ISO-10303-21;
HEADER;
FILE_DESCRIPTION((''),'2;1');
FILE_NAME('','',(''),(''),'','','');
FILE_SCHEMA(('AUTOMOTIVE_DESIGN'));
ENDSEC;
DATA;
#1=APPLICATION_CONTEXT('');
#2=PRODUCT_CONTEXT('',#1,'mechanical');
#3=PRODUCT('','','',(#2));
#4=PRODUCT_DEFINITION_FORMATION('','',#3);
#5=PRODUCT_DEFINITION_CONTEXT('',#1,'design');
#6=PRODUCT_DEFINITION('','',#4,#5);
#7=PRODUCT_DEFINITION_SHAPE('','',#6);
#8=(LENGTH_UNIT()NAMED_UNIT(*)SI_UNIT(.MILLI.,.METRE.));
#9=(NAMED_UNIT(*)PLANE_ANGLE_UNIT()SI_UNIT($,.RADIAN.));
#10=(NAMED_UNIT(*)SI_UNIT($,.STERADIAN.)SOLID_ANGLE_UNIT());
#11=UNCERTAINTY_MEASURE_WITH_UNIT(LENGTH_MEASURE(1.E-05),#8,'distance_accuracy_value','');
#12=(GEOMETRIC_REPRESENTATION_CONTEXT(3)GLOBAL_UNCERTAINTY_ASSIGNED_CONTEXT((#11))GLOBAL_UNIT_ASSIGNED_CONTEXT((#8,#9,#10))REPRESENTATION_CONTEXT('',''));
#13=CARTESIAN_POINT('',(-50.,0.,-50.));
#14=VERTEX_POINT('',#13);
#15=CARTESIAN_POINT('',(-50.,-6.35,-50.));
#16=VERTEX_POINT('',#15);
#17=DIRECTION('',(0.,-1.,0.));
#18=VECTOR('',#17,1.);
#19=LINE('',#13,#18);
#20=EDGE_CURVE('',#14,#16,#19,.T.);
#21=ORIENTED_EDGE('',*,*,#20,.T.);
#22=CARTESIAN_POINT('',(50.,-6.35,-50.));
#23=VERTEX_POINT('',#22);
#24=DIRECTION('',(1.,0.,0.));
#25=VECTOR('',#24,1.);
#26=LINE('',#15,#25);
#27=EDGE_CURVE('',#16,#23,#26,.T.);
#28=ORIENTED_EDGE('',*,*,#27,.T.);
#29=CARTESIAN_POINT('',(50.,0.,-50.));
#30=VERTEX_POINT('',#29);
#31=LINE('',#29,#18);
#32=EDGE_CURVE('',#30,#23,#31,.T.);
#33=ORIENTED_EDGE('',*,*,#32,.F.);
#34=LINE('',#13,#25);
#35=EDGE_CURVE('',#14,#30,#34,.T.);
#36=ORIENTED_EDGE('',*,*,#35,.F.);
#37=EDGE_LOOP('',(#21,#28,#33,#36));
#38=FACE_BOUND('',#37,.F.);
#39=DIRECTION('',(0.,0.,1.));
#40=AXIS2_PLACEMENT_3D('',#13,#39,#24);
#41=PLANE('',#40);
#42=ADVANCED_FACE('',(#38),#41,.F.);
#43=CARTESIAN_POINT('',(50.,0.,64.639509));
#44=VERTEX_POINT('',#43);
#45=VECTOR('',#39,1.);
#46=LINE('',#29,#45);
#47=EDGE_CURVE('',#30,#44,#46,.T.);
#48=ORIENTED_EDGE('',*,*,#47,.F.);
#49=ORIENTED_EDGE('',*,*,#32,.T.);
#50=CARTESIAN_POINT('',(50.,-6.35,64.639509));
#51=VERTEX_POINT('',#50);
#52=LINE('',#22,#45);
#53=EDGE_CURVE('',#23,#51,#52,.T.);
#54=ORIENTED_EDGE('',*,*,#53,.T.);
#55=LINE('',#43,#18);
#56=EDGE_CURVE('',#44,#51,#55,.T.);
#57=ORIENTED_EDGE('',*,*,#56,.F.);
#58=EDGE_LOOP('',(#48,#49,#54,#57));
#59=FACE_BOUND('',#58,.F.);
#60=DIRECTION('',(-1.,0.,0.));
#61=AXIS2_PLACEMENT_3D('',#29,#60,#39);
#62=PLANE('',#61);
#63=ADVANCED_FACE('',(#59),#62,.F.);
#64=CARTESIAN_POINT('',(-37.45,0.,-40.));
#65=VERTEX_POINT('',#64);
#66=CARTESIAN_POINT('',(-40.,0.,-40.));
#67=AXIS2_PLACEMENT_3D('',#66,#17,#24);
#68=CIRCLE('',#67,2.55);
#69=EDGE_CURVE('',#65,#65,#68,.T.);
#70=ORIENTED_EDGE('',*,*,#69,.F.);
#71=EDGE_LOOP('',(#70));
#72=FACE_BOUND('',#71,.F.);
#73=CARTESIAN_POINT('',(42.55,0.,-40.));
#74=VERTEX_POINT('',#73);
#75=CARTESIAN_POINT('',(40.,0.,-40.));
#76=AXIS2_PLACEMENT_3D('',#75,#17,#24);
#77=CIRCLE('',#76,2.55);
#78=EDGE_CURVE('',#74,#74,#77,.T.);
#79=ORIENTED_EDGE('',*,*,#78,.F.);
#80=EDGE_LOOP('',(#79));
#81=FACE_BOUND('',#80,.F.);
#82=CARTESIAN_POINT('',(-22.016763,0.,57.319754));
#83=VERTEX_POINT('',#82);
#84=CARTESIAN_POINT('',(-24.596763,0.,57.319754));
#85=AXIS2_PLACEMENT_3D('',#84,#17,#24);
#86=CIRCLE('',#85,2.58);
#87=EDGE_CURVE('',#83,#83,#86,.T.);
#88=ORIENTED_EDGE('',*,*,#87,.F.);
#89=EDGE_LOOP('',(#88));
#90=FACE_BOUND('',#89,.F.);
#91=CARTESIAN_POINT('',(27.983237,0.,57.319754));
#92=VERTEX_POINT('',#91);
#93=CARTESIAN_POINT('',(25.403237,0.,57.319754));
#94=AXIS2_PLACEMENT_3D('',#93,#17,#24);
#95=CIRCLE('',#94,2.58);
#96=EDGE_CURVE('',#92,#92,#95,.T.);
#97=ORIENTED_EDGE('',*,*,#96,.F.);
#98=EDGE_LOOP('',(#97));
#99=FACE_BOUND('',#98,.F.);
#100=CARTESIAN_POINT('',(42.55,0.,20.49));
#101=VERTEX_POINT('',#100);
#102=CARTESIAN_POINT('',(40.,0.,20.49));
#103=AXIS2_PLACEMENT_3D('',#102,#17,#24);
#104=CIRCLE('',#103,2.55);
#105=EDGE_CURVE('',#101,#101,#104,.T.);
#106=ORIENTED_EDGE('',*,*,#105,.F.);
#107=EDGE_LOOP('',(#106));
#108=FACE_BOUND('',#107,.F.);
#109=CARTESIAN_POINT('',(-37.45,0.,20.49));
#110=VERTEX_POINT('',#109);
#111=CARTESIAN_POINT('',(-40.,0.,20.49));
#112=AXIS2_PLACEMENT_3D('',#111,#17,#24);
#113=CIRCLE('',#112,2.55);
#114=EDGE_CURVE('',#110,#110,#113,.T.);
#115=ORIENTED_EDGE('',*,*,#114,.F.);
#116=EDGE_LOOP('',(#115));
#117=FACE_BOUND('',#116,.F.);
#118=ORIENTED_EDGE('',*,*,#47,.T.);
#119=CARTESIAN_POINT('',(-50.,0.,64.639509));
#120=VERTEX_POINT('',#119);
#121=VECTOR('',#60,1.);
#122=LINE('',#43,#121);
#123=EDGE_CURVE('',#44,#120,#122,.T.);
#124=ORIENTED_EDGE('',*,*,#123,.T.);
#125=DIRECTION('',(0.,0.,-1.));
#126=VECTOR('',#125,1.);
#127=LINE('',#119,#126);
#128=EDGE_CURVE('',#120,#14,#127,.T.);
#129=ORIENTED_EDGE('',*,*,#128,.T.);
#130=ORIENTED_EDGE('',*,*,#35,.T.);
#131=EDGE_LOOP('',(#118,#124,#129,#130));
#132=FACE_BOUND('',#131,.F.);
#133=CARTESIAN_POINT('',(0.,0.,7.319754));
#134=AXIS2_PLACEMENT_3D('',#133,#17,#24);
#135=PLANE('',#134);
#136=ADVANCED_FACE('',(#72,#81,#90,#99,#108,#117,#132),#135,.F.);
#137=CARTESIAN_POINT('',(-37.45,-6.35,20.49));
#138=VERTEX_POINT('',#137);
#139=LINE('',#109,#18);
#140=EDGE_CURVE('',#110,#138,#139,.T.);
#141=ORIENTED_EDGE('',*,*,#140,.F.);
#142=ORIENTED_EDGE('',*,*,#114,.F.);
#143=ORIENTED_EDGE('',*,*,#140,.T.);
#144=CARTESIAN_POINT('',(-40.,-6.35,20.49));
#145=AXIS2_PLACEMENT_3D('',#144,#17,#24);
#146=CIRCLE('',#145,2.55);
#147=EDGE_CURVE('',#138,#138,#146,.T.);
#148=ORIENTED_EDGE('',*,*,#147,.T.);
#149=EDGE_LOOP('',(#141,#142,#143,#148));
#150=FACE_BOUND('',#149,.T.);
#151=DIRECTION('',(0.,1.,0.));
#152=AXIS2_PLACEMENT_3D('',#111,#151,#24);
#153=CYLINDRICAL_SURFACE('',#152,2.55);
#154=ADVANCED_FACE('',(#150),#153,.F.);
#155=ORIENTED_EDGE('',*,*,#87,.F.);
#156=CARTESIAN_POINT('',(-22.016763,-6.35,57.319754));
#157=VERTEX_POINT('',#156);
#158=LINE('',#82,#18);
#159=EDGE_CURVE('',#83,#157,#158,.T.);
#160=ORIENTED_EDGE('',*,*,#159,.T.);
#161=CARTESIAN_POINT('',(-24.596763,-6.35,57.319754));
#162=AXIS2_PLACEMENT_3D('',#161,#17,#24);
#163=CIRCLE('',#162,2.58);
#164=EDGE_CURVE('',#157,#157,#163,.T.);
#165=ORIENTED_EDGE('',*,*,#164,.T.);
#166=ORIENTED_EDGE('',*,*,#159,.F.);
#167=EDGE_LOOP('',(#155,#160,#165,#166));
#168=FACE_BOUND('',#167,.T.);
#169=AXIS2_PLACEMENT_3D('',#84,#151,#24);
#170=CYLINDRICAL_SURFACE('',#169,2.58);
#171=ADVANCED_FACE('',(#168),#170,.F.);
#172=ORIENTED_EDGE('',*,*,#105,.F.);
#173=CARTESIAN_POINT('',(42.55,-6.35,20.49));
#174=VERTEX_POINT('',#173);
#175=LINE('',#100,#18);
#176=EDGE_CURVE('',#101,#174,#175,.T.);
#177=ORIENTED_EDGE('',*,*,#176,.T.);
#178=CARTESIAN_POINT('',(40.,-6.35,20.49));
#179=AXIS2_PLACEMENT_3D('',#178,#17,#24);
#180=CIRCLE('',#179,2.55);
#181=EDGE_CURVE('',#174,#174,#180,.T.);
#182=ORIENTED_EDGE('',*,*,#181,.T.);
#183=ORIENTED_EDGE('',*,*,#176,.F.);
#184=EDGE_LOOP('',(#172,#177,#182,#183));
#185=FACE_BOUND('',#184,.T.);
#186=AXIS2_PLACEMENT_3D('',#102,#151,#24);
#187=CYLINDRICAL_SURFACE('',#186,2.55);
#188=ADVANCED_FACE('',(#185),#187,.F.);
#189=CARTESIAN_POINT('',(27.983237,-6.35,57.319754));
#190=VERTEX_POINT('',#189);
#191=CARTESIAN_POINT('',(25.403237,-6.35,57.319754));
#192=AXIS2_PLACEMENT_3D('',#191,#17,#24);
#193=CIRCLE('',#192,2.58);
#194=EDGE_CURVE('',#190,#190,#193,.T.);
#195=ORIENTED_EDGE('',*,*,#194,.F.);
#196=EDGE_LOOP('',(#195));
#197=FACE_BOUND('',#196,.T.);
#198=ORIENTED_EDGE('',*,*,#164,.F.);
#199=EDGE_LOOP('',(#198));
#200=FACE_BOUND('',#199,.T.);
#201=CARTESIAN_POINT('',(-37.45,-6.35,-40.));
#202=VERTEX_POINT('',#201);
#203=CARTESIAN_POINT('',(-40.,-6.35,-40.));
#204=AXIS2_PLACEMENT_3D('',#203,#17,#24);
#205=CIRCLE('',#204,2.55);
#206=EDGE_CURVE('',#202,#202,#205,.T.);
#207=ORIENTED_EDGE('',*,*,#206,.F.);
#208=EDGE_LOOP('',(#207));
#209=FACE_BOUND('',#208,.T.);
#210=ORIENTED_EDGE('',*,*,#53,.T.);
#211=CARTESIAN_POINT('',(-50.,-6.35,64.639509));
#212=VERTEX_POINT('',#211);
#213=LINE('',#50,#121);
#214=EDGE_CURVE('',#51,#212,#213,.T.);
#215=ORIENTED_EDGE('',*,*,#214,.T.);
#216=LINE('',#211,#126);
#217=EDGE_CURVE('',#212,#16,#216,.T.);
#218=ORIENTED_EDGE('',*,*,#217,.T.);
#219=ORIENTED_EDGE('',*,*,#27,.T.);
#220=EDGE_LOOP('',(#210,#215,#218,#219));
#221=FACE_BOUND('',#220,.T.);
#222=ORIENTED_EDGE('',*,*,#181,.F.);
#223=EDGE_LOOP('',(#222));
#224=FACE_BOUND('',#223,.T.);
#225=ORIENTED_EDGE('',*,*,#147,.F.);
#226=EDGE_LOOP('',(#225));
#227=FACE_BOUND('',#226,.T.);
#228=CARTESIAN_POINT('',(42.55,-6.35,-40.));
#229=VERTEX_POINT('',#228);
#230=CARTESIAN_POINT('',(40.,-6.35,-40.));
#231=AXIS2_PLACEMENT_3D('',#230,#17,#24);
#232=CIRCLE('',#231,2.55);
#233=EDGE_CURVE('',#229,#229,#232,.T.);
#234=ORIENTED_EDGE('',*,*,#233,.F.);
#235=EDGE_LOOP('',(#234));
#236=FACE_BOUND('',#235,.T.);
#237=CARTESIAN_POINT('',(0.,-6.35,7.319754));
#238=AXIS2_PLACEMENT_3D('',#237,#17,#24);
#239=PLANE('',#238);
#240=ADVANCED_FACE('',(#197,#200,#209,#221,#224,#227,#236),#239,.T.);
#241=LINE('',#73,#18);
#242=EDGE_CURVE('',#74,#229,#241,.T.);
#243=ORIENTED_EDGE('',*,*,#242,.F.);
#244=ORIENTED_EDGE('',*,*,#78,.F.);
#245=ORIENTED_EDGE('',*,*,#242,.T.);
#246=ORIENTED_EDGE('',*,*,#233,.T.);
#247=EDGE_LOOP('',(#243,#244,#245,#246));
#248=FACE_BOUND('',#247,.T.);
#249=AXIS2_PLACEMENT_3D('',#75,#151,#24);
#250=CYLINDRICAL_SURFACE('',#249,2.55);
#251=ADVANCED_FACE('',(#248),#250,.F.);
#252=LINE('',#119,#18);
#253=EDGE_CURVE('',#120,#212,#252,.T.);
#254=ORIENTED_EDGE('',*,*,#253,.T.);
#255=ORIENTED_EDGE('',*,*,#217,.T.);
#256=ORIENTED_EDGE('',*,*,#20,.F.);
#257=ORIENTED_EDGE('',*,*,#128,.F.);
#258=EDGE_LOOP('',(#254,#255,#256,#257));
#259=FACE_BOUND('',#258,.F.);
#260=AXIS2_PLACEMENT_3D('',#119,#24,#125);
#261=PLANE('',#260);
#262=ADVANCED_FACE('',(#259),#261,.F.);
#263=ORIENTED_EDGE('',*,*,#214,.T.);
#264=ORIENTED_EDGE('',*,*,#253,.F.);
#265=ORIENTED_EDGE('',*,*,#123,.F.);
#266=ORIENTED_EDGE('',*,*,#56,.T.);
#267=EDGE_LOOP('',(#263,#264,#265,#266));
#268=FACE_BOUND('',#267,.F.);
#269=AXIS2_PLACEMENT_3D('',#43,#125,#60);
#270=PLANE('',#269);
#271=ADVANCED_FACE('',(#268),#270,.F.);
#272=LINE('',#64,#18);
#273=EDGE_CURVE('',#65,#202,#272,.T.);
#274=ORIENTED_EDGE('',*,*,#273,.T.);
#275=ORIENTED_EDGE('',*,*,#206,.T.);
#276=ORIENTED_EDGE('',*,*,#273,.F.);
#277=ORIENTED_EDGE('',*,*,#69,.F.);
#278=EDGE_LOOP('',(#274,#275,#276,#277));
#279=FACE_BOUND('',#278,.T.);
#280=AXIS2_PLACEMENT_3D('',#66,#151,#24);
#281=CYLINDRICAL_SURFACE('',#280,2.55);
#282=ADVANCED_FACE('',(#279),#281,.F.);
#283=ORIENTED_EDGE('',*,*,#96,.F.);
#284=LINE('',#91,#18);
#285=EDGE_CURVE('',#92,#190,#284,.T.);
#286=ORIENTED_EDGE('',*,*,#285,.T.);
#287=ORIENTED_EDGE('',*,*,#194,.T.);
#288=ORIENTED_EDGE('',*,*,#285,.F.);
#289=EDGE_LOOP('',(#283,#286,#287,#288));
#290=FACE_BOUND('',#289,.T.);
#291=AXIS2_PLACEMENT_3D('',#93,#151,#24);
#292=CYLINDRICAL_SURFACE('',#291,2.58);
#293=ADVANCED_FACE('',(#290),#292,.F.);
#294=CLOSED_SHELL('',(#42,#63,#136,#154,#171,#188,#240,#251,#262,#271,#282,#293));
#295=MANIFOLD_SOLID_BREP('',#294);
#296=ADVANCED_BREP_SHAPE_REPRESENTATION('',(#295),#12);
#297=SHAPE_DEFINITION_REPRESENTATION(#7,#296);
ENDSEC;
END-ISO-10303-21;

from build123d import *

# Parameters (mm, degrees)
F0_R     = 2.55
F0_R_2   = 2.58
F1_DEPTH = 6.35


# Not quite as in the source:
# - a feature names something its author has since deleted; it is built from what else it names


with BuildPart() as f1:
    # F0 (on Front) → F1 (new body)
    with BuildSketch(Plane.XZ):
        Polygon((-50, -50), (50, -50), (50, 50), (50, 64.6395087242), (-50, 64.6395087242), (-50, 50), align=None)
        with Locations((-40, -40)):
            Circle(F0_R, mode=Mode.SUBTRACT)
        with Locations((40, -40)):
            Circle(F0_R, mode=Mode.SUBTRACT)
        with Locations((-40, 20.49)):
            Circle(F0_R, mode=Mode.SUBTRACT)
        with Locations((-24.5967630297, 57.3197543621)):
            Circle(F0_R_2, mode=Mode.SUBTRACT)
        with Locations((40, 20.49)):
            Circle(F0_R, mode=Mode.SUBTRACT)
        with Locations((25.4032369703, 57.3197543621)):
            Circle(F0_R_2, mode=Mode.SUBTRACT)
    extrude(amount=F1_DEPTH)


solid = f1.part
